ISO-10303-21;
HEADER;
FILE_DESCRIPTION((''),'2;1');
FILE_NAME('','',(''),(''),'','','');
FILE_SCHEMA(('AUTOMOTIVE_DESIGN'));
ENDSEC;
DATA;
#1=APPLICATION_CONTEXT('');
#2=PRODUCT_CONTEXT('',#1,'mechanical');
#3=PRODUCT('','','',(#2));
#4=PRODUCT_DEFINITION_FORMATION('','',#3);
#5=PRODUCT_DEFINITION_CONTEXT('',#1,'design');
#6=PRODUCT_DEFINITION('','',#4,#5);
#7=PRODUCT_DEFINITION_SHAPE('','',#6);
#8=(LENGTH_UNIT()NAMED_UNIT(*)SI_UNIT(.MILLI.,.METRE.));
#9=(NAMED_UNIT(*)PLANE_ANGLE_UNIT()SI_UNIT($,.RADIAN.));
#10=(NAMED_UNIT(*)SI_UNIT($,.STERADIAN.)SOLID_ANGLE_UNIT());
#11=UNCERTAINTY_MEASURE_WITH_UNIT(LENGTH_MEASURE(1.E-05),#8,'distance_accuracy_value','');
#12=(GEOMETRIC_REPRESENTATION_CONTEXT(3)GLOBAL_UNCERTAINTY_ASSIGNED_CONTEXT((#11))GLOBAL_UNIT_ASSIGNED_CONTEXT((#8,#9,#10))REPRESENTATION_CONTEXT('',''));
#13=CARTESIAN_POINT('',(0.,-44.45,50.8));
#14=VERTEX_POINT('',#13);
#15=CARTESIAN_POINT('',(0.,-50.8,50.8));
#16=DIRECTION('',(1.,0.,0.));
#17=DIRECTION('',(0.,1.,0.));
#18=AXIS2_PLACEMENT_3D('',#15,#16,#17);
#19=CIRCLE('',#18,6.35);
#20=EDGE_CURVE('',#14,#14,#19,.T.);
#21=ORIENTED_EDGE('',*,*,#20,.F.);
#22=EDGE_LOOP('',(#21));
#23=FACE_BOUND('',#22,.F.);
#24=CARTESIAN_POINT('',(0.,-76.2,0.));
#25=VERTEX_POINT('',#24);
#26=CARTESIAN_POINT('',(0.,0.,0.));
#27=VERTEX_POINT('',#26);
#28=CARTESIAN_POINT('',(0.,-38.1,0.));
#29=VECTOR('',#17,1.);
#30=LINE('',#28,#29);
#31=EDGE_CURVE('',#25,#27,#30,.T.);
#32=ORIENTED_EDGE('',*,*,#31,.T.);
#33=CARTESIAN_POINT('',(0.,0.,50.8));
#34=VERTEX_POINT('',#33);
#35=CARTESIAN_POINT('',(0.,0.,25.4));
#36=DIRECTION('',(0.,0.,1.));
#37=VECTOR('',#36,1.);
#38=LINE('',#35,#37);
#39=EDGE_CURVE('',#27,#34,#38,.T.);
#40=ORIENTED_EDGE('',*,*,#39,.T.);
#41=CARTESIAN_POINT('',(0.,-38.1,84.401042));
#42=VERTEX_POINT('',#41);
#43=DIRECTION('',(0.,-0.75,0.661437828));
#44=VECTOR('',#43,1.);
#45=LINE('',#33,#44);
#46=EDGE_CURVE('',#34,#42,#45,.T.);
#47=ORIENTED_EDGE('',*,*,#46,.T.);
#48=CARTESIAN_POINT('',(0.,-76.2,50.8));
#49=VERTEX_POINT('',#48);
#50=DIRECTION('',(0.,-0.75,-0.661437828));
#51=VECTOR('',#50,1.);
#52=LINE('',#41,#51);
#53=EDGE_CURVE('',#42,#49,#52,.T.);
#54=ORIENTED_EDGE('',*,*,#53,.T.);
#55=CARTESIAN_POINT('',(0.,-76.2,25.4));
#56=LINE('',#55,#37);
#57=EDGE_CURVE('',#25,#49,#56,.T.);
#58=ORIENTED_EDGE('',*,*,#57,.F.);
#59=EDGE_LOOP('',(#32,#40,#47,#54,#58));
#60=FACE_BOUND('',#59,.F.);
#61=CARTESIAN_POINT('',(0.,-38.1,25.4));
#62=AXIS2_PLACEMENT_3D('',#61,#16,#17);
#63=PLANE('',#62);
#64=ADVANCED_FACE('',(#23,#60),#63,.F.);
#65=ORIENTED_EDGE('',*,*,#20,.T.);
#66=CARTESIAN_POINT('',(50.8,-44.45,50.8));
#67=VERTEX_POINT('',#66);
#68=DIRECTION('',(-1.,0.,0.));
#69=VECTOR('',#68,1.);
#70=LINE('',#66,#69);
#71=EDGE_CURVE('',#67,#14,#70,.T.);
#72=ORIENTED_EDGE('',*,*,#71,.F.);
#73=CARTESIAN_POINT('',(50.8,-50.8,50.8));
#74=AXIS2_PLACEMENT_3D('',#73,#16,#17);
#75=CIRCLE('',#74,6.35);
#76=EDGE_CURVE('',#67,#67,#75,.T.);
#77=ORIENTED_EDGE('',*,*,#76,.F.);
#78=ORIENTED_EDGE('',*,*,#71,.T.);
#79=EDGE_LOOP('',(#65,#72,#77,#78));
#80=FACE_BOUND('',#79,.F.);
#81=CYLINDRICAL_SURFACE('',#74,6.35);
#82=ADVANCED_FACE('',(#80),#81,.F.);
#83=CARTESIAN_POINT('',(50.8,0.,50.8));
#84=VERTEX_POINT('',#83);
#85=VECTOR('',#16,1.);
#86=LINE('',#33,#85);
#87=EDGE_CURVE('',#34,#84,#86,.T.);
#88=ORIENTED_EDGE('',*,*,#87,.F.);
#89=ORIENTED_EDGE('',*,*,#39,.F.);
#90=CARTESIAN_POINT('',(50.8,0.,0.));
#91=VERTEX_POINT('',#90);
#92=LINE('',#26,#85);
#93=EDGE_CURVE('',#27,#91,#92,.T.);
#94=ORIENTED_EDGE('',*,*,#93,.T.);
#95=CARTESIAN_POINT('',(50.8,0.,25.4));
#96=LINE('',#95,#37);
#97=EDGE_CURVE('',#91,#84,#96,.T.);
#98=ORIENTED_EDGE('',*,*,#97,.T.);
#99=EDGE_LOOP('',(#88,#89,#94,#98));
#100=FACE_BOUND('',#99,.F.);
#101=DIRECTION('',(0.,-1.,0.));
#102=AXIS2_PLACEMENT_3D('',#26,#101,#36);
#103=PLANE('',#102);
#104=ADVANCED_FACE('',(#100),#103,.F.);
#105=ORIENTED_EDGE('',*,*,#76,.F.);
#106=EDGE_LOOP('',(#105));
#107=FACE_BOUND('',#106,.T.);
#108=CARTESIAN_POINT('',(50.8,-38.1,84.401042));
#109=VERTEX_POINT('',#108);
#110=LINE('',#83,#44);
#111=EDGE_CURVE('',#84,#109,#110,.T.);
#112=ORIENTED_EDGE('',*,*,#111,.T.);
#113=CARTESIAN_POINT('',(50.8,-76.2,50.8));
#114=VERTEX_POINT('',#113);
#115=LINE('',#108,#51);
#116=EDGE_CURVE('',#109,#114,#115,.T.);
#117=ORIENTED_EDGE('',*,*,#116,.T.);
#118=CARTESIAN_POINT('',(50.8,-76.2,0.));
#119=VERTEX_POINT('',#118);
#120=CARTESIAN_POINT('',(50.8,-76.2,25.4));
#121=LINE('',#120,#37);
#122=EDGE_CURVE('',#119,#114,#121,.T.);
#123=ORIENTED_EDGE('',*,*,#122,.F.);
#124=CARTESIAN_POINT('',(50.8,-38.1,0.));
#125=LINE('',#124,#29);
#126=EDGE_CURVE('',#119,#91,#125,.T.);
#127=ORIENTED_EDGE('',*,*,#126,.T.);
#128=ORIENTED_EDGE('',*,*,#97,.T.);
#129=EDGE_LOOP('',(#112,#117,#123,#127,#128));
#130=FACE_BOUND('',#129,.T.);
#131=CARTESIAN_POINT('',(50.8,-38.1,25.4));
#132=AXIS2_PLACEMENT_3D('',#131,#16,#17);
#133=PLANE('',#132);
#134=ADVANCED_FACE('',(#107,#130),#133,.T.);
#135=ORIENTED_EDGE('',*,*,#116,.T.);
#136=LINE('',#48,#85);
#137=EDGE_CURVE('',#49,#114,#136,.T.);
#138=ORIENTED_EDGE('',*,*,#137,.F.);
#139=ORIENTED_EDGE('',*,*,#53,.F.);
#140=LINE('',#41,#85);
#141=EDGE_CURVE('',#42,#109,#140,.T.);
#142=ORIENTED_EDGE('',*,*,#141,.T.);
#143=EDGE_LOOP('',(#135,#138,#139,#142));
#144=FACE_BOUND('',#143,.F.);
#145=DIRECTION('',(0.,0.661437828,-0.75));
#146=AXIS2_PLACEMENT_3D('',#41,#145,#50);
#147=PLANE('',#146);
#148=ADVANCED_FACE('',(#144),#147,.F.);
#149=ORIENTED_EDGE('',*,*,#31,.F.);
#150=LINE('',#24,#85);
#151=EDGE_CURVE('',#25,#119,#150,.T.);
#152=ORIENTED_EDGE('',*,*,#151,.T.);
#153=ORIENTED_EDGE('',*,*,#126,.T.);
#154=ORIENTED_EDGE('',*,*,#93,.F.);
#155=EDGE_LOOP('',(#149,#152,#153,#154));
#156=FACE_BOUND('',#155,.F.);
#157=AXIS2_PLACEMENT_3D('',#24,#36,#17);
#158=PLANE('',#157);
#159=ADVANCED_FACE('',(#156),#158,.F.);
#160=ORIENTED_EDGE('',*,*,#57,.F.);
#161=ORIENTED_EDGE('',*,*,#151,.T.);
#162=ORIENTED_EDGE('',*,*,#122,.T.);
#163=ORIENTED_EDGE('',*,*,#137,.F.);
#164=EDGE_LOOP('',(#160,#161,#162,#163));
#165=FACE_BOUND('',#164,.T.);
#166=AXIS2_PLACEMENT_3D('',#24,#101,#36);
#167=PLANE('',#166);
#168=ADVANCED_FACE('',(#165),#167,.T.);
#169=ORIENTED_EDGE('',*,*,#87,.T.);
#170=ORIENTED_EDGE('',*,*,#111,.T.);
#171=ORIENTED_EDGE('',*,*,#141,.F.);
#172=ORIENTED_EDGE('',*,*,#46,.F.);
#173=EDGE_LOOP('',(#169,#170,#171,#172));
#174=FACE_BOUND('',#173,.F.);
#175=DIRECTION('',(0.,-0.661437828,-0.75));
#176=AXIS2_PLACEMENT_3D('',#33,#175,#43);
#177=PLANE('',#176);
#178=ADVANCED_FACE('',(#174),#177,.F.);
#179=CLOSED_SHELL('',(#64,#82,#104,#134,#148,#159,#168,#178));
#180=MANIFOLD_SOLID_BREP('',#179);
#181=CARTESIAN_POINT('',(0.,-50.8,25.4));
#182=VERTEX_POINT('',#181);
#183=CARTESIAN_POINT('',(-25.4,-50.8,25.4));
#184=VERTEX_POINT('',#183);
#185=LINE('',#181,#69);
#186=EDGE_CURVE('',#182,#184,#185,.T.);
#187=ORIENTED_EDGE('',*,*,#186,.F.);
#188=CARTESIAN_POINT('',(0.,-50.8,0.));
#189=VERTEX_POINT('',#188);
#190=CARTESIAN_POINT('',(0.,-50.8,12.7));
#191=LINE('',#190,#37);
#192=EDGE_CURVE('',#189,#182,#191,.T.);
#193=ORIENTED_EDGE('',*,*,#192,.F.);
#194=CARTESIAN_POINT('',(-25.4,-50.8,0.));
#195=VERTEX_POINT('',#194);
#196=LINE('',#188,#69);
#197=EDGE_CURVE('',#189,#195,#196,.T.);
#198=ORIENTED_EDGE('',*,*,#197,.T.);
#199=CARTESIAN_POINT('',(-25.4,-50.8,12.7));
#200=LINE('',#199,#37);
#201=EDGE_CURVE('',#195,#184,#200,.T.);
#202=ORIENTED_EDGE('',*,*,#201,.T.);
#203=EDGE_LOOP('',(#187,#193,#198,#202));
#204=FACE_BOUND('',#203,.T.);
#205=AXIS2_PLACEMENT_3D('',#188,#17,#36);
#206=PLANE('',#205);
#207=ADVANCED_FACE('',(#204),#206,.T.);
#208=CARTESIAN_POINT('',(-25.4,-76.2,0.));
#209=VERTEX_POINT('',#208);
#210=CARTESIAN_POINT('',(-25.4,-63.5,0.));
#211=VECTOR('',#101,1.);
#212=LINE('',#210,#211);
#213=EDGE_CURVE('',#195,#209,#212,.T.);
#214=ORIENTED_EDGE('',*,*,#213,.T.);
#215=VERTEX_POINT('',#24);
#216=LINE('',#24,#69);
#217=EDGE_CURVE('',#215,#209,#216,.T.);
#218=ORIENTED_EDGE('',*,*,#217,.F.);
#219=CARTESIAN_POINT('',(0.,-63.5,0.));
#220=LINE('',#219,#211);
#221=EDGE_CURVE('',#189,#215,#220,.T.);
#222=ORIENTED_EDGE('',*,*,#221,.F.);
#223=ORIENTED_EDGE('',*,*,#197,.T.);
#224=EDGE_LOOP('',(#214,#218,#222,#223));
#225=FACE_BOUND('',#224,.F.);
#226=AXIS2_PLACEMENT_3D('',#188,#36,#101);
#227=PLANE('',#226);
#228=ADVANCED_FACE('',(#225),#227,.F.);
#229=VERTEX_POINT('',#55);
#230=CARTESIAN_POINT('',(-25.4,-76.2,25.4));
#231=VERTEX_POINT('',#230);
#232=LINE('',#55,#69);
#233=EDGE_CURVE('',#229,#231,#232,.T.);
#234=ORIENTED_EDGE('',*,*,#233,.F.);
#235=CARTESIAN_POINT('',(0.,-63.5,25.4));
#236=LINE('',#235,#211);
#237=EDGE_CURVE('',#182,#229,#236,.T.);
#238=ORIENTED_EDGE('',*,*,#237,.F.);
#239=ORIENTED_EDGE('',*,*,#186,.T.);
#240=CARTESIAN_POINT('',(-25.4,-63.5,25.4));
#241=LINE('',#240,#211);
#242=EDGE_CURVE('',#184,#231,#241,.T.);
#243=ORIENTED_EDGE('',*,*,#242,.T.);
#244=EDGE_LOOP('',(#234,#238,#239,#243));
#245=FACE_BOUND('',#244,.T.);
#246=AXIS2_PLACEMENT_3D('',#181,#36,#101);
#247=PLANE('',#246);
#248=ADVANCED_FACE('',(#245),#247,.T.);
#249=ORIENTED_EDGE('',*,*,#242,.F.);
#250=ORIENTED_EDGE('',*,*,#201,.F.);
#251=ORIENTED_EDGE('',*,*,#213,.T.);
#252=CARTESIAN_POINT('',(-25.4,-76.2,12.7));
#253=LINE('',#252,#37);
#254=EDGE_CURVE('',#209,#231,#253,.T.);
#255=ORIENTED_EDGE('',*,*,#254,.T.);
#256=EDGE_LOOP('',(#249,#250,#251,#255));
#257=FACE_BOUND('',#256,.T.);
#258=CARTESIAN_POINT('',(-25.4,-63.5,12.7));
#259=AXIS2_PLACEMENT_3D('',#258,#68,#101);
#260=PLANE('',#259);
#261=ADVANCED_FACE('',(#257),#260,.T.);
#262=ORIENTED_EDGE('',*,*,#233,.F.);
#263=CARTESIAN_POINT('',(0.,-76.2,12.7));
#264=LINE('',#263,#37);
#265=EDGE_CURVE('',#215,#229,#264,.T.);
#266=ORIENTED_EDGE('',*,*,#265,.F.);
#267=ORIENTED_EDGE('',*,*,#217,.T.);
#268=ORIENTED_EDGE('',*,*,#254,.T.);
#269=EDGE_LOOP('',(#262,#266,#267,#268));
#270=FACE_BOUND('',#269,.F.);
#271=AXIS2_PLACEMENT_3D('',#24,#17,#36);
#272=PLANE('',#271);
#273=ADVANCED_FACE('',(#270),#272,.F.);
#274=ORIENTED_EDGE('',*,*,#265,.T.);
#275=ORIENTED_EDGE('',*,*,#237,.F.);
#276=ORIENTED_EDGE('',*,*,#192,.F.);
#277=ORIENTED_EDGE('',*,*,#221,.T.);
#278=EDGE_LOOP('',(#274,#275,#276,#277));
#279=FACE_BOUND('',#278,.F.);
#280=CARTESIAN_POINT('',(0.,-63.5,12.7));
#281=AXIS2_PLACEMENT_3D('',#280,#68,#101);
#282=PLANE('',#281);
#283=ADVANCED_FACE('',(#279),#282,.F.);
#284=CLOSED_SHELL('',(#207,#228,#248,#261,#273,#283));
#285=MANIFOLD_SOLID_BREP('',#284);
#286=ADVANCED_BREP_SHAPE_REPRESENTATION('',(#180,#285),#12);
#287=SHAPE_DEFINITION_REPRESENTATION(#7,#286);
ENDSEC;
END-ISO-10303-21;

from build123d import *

# Parameters (mm, degrees)
F0_W     = 76.2
F0_H     = 50.8
F1_DEPTH = 50.8
F2_R     = 6.35
F3_DEPTH = 50.801
F5_DEPTH = 182
F6_W     = 25.4
F6_H     = 25.4
F7_DEPTH = 25.4


# Not quite as in the source:
# - an extrude ends at something that could not be found from the text; its depth is read off the source's solid


with BuildPart() as f1:
    # F0 (on Right) → F1 (new body)
    with BuildSketch(Plane.YZ):
        with Locations((-38.1, 25.4)):
            Rectangle(F0_W, F0_H)
        Polygon((-76.2, 50.8), (0, 50.8), (-38.1, 84.4010416505), align=None)
    extrude(amount=F1_DEPTH)

    # F2 (on face) → F3 (cut, through all)
    with BuildSketch(Plane.YZ.offset(50.8)):
        with Locations((-50.8, 50.8)):
            Circle(F2_R)
    extrude(amount=-F3_DEPTH, mode=Mode.SUBTRACT)

    # F4 (on Right) → F5 (cut, through all)
    with BuildSketch(Plane.YZ):
        with BuildLine():
            add(Edge.make_bspline(
                [(39.2249748279, 36.9491242033), (39.1707624624, 37.3291437229), (45.6123477048, 50.2146208478), (62.3111618585, 34.8878075899), (38.0564666464, 34.8735909417), (51.9023345065, 38.8834101985), (42.5172270712, 42.0337126477), (39.262733644, 36.6844412837), (39.2249748279, 36.9491242033)],
                knots=[0, 0, 0, 0, 0.1947455978, 0.3915991224, 0.5908148595, 0.7271841262, 0.8643600374, 1, 1, 1, 1], degree=3))
        make_face()
    extrude(amount=-F5_DEPTH, mode=Mode.SUBTRACT)


with BuildPart() as f7:
    # F6 (on face) → F7 (new body)
    with BuildSketch(Plane(origin=(0, 0, 0), x_dir=(0, -1, 0), z_dir=(-1, 0, 0))):
        with Locations((63.5, 12.7)):
            Rectangle(F6_W, F6_H)
    extrude(amount=F7_DEPTH)


solid = Compound([f1.part, f7.part])
